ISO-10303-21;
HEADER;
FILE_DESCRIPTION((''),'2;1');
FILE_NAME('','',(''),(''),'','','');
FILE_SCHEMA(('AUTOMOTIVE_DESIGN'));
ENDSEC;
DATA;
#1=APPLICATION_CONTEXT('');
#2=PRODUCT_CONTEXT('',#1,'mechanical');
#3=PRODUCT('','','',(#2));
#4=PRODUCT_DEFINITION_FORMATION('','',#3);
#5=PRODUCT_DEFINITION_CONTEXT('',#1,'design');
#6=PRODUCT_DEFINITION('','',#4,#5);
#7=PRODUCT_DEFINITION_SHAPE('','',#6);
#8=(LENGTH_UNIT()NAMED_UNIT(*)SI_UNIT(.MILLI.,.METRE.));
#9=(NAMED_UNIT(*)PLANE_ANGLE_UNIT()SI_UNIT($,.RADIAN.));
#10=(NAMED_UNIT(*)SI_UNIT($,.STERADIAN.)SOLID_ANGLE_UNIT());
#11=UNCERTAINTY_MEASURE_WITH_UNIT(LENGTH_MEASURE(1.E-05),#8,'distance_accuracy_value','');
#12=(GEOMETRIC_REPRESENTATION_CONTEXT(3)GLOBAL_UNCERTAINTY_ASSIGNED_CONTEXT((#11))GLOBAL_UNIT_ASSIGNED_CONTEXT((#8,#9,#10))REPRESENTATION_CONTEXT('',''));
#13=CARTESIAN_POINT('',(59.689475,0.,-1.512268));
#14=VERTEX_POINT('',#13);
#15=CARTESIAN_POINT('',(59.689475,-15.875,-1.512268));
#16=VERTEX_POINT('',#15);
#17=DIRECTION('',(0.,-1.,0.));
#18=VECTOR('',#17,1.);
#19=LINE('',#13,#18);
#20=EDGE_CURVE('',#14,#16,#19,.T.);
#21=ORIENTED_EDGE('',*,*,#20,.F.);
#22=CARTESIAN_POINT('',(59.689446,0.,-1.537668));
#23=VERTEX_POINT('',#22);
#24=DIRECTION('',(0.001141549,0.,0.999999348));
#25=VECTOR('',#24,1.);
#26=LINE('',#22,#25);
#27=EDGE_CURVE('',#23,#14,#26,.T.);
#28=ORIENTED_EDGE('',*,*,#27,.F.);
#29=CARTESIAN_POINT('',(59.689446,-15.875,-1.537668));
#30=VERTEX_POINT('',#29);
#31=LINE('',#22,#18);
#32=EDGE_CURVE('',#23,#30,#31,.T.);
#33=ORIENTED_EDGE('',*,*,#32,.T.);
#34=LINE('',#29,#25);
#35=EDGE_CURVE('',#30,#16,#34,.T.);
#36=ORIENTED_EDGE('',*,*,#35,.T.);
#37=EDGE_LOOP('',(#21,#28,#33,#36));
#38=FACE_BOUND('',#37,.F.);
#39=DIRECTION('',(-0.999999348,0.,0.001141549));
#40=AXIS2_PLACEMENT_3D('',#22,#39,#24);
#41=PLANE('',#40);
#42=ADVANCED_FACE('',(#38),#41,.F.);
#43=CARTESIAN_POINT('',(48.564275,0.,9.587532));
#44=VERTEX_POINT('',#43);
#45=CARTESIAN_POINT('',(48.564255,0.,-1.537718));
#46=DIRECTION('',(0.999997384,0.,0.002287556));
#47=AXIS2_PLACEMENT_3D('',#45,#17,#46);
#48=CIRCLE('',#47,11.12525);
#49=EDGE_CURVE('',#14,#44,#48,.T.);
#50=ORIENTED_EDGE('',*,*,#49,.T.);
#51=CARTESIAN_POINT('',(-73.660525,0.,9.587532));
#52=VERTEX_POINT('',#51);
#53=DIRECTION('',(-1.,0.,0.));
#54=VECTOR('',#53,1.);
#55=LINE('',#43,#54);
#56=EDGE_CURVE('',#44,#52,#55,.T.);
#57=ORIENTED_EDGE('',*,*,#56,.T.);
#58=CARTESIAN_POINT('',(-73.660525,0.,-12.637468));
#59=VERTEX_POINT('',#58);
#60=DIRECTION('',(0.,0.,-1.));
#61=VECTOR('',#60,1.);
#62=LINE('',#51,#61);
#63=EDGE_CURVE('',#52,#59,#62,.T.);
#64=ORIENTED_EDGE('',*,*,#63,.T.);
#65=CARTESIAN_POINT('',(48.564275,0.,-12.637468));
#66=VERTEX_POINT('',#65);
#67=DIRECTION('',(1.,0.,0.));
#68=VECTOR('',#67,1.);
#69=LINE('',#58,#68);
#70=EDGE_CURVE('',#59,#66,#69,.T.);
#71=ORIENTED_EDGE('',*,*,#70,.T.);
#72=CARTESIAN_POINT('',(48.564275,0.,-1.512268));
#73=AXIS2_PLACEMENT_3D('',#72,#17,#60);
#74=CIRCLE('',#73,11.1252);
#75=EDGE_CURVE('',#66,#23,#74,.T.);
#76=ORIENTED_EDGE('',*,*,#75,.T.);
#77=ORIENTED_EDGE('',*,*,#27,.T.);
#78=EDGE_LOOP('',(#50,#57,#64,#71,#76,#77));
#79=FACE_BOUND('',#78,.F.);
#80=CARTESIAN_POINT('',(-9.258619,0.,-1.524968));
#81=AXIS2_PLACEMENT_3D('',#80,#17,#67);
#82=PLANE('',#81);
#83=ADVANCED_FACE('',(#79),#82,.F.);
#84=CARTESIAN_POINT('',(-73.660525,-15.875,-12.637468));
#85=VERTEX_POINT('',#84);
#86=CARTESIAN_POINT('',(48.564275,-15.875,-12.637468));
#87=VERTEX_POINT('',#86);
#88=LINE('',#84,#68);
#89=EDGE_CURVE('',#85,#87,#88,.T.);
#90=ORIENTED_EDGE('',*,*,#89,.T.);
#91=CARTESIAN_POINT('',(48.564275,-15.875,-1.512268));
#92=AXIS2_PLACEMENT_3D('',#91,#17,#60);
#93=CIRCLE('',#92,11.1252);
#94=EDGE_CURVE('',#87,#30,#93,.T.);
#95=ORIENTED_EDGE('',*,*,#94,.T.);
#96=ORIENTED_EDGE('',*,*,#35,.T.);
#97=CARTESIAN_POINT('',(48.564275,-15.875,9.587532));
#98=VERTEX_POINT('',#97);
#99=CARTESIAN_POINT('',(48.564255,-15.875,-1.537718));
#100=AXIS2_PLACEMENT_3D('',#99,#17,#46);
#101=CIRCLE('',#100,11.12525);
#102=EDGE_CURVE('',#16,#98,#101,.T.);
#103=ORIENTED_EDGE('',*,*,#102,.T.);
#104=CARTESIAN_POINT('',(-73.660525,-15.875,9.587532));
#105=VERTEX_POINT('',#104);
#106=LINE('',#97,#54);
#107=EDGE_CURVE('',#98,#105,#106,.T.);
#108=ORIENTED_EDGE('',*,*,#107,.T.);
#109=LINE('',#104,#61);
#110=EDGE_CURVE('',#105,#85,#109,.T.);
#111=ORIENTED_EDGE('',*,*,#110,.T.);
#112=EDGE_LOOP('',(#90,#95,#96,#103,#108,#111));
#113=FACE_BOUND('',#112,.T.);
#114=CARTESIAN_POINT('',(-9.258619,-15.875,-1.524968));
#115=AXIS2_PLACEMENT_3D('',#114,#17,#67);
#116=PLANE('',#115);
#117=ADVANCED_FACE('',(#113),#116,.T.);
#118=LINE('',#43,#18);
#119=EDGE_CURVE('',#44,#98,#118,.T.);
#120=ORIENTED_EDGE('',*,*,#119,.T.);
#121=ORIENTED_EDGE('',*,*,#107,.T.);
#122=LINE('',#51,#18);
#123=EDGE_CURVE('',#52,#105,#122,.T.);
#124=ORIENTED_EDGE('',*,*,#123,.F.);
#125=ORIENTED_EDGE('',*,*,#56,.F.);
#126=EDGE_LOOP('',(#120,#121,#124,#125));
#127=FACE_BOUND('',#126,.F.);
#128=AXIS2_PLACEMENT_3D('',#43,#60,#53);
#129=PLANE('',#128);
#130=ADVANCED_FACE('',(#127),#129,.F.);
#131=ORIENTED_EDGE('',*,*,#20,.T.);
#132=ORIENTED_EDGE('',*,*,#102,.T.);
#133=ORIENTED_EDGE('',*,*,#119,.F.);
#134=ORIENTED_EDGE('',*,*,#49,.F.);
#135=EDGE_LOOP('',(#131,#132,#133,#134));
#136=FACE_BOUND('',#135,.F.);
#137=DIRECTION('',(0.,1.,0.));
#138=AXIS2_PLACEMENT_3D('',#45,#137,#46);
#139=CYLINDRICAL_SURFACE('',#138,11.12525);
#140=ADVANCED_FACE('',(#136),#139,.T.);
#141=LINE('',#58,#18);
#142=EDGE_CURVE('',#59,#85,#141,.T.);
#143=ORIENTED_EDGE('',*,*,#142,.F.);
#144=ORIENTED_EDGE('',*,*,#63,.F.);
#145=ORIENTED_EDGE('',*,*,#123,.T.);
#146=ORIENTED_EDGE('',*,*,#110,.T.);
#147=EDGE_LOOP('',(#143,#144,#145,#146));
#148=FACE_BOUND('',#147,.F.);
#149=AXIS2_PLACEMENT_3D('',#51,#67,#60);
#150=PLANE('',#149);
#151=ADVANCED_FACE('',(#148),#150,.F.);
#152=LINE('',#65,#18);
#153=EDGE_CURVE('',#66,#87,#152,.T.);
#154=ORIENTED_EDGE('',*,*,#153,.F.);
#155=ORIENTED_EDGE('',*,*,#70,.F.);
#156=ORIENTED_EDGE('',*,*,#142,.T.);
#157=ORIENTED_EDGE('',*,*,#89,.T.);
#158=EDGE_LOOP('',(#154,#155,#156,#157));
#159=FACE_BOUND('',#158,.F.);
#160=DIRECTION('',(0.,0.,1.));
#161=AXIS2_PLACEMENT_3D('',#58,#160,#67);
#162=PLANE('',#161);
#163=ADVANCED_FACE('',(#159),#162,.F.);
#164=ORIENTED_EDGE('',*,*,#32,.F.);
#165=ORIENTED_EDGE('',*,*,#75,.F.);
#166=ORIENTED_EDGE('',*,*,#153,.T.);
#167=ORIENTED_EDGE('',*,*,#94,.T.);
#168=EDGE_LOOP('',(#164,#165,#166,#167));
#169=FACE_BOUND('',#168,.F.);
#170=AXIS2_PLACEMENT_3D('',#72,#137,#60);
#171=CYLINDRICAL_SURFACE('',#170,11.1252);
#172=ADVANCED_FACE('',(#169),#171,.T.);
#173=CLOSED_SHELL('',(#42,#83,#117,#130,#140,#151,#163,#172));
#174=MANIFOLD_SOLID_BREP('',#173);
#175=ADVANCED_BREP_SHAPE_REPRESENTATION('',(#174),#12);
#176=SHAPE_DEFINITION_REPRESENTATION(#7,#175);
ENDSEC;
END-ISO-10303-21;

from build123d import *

# Parameters (mm, degrees)
F1_DEPTH = 15.875


# Not quite as in the source:
# - ends of sketch curves that miss each other by under 0.0002 mm in the source are joined


with BuildPart() as f1:
    # F0 (on Front) → F1 (new body)
    with BuildSketch(Plane.XZ):
        with BuildLine():
            Line((48.5642753523, 9.5875316944), (-73.6605246477, 9.5875316944))
            Line((-73.6605246477, 9.5875316944), (-73.6605246477, -12.6374683056))
            Line((-73.6605246477, -12.6374683056), (48.5642753523, -12.6374683056))
            ThreePointArc((48.5642753523, -12.6374683056), (56.4219943501, -9.3879477805), (59.689446357, -1.5376682394))
            Line((59.689446357, -1.5376682394), (59.6894753523, -1.5122683056))
            ThreePointArc((59.6894753523, -1.5122683056), (56.4219943501, 6.3380111693), (48.5642753523, 9.5875316944))
        make_face()
    extrude(amount=F1_DEPTH)


solid = f1.part
